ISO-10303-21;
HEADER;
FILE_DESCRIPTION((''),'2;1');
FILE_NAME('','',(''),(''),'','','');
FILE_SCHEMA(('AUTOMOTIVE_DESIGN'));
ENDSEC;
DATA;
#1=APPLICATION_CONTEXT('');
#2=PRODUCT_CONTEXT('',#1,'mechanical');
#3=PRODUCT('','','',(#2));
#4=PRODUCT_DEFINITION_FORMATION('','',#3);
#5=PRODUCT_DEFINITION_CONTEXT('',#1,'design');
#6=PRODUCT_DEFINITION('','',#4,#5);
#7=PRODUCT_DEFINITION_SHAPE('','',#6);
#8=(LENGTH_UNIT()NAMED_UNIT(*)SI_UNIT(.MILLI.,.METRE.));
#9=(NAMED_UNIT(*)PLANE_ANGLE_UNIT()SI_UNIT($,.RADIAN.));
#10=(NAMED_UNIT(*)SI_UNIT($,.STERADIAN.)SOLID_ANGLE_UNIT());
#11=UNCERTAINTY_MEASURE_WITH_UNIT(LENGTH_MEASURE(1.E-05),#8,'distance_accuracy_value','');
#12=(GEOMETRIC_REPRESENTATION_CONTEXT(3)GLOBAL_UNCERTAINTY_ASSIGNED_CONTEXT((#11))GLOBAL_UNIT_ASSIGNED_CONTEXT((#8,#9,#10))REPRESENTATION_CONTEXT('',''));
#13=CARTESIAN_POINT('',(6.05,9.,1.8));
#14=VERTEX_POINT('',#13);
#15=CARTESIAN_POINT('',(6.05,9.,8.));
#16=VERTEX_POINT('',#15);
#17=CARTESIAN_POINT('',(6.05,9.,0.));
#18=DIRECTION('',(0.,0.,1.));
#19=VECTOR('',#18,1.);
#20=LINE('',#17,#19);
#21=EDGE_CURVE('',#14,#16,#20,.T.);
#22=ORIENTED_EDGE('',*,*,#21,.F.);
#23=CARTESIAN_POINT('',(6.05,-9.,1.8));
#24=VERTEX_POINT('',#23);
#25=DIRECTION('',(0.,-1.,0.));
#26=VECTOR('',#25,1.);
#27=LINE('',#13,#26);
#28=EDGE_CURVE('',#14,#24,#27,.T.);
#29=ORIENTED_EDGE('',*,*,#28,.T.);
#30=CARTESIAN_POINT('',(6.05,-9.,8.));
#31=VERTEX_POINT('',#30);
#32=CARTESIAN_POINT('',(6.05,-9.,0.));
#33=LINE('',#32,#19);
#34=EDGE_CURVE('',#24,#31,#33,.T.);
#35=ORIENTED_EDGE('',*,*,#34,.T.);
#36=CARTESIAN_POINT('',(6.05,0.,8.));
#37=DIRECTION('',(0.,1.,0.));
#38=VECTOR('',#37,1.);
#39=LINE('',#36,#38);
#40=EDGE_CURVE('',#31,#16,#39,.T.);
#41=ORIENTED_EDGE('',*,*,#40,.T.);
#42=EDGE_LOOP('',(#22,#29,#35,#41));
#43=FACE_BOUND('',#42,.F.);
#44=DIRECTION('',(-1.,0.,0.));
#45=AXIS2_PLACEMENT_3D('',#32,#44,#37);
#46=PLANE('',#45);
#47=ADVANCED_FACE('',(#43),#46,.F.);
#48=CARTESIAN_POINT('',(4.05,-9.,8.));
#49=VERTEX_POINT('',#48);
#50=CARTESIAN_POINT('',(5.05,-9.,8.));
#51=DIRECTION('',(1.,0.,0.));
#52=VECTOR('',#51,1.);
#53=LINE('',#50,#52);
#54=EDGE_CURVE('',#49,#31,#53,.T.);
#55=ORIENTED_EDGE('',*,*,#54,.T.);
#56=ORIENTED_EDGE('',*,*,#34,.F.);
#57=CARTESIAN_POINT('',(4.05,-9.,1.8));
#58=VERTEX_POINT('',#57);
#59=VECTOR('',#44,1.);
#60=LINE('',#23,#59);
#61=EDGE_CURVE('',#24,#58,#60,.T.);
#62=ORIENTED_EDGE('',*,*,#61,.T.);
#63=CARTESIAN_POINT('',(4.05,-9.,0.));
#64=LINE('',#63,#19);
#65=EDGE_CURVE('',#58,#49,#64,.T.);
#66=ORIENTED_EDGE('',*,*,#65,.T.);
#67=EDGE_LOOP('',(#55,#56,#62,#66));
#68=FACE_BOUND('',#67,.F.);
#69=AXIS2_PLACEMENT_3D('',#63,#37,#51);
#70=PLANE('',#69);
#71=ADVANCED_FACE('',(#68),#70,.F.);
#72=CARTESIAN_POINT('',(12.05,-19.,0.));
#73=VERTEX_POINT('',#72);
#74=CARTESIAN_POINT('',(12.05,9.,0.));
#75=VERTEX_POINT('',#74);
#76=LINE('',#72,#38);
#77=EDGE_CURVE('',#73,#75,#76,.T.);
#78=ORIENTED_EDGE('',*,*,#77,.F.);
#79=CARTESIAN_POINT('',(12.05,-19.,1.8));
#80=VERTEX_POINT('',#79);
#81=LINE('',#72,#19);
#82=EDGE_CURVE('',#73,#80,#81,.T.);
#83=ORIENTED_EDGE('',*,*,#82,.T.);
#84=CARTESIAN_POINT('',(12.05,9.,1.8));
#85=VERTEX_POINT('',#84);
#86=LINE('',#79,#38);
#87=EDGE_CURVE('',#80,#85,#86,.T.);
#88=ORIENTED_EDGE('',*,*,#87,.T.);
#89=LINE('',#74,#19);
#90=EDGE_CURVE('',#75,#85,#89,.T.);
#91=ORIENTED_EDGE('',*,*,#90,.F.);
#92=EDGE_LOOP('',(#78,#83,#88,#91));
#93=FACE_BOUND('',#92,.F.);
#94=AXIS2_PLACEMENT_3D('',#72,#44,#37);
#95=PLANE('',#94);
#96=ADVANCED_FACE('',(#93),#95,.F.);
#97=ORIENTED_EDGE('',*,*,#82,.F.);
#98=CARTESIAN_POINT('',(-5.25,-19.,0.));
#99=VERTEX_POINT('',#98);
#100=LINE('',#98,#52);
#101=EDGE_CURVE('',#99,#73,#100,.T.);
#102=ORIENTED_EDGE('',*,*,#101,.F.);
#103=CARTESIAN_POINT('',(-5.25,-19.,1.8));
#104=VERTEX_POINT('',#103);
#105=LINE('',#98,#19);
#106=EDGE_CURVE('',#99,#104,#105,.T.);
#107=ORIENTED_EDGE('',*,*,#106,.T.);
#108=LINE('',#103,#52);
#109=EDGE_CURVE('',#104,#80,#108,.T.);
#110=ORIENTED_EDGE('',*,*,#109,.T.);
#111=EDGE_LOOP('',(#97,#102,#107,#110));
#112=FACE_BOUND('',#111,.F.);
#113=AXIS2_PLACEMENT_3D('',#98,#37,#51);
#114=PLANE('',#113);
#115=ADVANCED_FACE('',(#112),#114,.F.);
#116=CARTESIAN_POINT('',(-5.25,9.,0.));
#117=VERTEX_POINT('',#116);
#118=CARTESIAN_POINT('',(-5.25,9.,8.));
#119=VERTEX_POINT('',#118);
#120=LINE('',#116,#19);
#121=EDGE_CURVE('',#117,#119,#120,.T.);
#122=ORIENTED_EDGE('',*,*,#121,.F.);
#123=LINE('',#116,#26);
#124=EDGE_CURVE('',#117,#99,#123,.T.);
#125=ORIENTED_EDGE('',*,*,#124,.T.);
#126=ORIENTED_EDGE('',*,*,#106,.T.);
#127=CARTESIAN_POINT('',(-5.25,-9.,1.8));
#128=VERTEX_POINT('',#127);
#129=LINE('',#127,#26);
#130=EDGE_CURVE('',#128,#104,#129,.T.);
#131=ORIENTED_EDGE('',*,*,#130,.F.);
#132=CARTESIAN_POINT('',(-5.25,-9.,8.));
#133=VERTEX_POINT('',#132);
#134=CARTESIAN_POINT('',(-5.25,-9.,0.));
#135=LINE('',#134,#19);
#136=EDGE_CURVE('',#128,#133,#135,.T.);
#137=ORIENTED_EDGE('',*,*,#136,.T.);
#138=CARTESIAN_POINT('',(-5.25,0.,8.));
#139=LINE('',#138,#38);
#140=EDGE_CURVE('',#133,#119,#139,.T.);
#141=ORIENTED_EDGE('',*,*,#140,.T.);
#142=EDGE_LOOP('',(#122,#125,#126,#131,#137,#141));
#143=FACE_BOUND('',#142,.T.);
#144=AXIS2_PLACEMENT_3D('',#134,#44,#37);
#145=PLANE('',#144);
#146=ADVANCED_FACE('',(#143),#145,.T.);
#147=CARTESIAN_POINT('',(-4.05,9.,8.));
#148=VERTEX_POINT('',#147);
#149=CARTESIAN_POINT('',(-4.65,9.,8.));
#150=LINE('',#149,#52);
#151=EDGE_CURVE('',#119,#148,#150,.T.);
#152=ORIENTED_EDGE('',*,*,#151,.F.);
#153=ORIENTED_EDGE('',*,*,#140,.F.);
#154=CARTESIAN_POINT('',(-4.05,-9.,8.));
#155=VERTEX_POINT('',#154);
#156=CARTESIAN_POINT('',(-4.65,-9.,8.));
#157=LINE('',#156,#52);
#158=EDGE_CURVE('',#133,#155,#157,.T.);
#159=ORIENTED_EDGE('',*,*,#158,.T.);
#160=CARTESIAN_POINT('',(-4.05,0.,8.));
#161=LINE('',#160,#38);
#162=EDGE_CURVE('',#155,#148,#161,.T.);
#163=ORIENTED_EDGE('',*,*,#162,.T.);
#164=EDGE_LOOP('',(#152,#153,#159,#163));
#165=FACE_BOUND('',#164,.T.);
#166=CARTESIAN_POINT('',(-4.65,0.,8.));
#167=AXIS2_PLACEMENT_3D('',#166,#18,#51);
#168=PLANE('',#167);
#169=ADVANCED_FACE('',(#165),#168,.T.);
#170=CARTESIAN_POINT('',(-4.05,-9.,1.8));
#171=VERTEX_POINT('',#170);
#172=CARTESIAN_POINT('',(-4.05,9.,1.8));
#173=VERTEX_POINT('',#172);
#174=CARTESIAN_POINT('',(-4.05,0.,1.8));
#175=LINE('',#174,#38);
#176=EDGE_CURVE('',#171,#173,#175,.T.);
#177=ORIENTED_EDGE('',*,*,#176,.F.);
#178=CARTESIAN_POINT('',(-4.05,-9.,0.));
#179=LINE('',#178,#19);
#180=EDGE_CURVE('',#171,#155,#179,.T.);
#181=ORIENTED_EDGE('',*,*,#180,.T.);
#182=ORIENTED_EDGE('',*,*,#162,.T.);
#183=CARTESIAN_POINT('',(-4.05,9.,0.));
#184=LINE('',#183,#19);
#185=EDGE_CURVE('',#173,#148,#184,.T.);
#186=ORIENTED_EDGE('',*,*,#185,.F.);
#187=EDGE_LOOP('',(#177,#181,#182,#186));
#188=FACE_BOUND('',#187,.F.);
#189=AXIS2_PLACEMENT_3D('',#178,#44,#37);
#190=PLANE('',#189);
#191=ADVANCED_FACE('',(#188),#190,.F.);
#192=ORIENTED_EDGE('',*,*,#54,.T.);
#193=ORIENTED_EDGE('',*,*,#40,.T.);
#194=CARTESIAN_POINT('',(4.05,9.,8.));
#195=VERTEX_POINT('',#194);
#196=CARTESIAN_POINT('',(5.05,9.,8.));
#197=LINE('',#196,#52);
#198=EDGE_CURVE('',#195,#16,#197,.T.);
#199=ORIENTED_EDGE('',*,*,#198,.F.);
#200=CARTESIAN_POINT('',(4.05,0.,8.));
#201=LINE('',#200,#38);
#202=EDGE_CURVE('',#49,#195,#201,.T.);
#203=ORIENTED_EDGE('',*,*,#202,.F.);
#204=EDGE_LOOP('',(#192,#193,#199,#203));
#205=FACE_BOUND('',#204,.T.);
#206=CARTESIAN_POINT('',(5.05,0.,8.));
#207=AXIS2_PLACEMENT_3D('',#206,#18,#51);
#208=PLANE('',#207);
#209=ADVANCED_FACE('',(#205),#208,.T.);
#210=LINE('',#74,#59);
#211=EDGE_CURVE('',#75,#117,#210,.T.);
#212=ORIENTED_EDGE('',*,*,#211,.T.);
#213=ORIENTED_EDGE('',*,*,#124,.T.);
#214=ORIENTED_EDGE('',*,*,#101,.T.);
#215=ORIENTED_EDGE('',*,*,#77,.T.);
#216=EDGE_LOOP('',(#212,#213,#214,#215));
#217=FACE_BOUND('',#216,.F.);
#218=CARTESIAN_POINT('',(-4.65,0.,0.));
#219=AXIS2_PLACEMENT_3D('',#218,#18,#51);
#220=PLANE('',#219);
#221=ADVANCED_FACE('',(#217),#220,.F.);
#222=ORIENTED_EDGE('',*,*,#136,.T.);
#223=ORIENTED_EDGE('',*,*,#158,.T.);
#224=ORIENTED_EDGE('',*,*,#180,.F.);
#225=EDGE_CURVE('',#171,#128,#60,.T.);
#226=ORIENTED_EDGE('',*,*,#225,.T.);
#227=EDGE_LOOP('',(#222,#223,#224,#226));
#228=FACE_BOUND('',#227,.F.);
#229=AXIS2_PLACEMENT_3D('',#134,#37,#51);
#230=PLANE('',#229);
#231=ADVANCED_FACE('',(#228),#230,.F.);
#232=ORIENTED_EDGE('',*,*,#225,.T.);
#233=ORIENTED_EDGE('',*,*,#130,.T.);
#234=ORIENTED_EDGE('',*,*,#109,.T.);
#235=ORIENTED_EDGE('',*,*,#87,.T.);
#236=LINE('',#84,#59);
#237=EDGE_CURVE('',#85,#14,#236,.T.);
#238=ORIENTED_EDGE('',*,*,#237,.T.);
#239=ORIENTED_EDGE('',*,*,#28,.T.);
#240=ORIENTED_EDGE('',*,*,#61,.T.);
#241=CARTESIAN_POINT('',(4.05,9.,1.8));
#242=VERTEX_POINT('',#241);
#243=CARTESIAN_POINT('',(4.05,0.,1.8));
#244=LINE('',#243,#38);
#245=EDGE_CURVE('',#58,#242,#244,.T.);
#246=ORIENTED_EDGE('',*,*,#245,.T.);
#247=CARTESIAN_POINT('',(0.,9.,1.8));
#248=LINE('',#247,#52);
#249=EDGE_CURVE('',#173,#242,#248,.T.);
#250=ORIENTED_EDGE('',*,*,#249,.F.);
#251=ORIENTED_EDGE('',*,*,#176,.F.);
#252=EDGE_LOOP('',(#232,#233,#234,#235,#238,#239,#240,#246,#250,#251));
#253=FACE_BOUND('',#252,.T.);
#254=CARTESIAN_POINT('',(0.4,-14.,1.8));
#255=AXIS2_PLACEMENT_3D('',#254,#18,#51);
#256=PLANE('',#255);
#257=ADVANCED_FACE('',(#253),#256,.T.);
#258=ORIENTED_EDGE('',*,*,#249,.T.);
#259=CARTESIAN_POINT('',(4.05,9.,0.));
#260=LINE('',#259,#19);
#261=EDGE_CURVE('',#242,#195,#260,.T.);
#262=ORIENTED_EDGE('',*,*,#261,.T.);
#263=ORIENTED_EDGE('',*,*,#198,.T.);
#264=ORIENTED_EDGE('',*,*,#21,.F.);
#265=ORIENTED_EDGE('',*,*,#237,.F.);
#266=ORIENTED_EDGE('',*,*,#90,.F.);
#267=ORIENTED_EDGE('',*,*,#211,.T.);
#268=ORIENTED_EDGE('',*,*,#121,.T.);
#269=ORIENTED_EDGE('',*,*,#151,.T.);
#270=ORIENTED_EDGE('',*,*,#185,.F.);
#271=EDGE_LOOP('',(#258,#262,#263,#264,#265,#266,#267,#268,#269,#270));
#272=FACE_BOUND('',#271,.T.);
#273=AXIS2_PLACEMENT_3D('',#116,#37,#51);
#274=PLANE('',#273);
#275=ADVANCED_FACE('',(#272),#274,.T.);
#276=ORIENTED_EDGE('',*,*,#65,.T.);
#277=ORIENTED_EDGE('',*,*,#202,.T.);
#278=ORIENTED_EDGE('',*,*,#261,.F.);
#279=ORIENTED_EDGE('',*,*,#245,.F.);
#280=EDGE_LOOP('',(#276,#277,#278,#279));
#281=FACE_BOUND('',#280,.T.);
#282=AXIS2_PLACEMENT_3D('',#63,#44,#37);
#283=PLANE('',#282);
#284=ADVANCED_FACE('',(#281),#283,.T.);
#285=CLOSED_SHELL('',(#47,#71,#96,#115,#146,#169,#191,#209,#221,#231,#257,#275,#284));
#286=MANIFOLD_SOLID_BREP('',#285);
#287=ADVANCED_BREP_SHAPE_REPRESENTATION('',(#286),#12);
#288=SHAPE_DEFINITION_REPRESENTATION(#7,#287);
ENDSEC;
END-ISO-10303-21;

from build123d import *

# Parameters (mm, degrees)
F0_W     = 8.1
F0_H     = 18
F1_DEPTH = 1.8
F0_W_2   = 1.2
F0_W_3   = 2
F2_DEPTH = 8


# Not quite as in the source:
# - a feature names something its author has since deleted; it is built from what else it names


with BuildPart() as f1:
    # F0 (on Top) → F1 (new body)
    with BuildSketch(Plane.XY):
        Polygon((6.05, -9), (4.05, -9), (-4.05, -9), (-5.25, -9), (-5.25, -19), (6.05, -19), align=None)
        Rectangle(F0_W, F0_H)
        Polygon((6.05, 9), (6.05, -9), (6.05, -19), (12.05, -19), (12.05, 9), align=None)
    extrude(amount=F1_DEPTH)

    # F0 (on Top) → F2 (join)
    with BuildSketch(Plane.XY):
        with Locations((-4.65, 0)):
            Rectangle(F0_W_2, F0_H)
        with Locations((5.05, 0)):
            Rectangle(F0_W_3, F0_H)
    extrude(amount=F2_DEPTH)


solid = f1.part
